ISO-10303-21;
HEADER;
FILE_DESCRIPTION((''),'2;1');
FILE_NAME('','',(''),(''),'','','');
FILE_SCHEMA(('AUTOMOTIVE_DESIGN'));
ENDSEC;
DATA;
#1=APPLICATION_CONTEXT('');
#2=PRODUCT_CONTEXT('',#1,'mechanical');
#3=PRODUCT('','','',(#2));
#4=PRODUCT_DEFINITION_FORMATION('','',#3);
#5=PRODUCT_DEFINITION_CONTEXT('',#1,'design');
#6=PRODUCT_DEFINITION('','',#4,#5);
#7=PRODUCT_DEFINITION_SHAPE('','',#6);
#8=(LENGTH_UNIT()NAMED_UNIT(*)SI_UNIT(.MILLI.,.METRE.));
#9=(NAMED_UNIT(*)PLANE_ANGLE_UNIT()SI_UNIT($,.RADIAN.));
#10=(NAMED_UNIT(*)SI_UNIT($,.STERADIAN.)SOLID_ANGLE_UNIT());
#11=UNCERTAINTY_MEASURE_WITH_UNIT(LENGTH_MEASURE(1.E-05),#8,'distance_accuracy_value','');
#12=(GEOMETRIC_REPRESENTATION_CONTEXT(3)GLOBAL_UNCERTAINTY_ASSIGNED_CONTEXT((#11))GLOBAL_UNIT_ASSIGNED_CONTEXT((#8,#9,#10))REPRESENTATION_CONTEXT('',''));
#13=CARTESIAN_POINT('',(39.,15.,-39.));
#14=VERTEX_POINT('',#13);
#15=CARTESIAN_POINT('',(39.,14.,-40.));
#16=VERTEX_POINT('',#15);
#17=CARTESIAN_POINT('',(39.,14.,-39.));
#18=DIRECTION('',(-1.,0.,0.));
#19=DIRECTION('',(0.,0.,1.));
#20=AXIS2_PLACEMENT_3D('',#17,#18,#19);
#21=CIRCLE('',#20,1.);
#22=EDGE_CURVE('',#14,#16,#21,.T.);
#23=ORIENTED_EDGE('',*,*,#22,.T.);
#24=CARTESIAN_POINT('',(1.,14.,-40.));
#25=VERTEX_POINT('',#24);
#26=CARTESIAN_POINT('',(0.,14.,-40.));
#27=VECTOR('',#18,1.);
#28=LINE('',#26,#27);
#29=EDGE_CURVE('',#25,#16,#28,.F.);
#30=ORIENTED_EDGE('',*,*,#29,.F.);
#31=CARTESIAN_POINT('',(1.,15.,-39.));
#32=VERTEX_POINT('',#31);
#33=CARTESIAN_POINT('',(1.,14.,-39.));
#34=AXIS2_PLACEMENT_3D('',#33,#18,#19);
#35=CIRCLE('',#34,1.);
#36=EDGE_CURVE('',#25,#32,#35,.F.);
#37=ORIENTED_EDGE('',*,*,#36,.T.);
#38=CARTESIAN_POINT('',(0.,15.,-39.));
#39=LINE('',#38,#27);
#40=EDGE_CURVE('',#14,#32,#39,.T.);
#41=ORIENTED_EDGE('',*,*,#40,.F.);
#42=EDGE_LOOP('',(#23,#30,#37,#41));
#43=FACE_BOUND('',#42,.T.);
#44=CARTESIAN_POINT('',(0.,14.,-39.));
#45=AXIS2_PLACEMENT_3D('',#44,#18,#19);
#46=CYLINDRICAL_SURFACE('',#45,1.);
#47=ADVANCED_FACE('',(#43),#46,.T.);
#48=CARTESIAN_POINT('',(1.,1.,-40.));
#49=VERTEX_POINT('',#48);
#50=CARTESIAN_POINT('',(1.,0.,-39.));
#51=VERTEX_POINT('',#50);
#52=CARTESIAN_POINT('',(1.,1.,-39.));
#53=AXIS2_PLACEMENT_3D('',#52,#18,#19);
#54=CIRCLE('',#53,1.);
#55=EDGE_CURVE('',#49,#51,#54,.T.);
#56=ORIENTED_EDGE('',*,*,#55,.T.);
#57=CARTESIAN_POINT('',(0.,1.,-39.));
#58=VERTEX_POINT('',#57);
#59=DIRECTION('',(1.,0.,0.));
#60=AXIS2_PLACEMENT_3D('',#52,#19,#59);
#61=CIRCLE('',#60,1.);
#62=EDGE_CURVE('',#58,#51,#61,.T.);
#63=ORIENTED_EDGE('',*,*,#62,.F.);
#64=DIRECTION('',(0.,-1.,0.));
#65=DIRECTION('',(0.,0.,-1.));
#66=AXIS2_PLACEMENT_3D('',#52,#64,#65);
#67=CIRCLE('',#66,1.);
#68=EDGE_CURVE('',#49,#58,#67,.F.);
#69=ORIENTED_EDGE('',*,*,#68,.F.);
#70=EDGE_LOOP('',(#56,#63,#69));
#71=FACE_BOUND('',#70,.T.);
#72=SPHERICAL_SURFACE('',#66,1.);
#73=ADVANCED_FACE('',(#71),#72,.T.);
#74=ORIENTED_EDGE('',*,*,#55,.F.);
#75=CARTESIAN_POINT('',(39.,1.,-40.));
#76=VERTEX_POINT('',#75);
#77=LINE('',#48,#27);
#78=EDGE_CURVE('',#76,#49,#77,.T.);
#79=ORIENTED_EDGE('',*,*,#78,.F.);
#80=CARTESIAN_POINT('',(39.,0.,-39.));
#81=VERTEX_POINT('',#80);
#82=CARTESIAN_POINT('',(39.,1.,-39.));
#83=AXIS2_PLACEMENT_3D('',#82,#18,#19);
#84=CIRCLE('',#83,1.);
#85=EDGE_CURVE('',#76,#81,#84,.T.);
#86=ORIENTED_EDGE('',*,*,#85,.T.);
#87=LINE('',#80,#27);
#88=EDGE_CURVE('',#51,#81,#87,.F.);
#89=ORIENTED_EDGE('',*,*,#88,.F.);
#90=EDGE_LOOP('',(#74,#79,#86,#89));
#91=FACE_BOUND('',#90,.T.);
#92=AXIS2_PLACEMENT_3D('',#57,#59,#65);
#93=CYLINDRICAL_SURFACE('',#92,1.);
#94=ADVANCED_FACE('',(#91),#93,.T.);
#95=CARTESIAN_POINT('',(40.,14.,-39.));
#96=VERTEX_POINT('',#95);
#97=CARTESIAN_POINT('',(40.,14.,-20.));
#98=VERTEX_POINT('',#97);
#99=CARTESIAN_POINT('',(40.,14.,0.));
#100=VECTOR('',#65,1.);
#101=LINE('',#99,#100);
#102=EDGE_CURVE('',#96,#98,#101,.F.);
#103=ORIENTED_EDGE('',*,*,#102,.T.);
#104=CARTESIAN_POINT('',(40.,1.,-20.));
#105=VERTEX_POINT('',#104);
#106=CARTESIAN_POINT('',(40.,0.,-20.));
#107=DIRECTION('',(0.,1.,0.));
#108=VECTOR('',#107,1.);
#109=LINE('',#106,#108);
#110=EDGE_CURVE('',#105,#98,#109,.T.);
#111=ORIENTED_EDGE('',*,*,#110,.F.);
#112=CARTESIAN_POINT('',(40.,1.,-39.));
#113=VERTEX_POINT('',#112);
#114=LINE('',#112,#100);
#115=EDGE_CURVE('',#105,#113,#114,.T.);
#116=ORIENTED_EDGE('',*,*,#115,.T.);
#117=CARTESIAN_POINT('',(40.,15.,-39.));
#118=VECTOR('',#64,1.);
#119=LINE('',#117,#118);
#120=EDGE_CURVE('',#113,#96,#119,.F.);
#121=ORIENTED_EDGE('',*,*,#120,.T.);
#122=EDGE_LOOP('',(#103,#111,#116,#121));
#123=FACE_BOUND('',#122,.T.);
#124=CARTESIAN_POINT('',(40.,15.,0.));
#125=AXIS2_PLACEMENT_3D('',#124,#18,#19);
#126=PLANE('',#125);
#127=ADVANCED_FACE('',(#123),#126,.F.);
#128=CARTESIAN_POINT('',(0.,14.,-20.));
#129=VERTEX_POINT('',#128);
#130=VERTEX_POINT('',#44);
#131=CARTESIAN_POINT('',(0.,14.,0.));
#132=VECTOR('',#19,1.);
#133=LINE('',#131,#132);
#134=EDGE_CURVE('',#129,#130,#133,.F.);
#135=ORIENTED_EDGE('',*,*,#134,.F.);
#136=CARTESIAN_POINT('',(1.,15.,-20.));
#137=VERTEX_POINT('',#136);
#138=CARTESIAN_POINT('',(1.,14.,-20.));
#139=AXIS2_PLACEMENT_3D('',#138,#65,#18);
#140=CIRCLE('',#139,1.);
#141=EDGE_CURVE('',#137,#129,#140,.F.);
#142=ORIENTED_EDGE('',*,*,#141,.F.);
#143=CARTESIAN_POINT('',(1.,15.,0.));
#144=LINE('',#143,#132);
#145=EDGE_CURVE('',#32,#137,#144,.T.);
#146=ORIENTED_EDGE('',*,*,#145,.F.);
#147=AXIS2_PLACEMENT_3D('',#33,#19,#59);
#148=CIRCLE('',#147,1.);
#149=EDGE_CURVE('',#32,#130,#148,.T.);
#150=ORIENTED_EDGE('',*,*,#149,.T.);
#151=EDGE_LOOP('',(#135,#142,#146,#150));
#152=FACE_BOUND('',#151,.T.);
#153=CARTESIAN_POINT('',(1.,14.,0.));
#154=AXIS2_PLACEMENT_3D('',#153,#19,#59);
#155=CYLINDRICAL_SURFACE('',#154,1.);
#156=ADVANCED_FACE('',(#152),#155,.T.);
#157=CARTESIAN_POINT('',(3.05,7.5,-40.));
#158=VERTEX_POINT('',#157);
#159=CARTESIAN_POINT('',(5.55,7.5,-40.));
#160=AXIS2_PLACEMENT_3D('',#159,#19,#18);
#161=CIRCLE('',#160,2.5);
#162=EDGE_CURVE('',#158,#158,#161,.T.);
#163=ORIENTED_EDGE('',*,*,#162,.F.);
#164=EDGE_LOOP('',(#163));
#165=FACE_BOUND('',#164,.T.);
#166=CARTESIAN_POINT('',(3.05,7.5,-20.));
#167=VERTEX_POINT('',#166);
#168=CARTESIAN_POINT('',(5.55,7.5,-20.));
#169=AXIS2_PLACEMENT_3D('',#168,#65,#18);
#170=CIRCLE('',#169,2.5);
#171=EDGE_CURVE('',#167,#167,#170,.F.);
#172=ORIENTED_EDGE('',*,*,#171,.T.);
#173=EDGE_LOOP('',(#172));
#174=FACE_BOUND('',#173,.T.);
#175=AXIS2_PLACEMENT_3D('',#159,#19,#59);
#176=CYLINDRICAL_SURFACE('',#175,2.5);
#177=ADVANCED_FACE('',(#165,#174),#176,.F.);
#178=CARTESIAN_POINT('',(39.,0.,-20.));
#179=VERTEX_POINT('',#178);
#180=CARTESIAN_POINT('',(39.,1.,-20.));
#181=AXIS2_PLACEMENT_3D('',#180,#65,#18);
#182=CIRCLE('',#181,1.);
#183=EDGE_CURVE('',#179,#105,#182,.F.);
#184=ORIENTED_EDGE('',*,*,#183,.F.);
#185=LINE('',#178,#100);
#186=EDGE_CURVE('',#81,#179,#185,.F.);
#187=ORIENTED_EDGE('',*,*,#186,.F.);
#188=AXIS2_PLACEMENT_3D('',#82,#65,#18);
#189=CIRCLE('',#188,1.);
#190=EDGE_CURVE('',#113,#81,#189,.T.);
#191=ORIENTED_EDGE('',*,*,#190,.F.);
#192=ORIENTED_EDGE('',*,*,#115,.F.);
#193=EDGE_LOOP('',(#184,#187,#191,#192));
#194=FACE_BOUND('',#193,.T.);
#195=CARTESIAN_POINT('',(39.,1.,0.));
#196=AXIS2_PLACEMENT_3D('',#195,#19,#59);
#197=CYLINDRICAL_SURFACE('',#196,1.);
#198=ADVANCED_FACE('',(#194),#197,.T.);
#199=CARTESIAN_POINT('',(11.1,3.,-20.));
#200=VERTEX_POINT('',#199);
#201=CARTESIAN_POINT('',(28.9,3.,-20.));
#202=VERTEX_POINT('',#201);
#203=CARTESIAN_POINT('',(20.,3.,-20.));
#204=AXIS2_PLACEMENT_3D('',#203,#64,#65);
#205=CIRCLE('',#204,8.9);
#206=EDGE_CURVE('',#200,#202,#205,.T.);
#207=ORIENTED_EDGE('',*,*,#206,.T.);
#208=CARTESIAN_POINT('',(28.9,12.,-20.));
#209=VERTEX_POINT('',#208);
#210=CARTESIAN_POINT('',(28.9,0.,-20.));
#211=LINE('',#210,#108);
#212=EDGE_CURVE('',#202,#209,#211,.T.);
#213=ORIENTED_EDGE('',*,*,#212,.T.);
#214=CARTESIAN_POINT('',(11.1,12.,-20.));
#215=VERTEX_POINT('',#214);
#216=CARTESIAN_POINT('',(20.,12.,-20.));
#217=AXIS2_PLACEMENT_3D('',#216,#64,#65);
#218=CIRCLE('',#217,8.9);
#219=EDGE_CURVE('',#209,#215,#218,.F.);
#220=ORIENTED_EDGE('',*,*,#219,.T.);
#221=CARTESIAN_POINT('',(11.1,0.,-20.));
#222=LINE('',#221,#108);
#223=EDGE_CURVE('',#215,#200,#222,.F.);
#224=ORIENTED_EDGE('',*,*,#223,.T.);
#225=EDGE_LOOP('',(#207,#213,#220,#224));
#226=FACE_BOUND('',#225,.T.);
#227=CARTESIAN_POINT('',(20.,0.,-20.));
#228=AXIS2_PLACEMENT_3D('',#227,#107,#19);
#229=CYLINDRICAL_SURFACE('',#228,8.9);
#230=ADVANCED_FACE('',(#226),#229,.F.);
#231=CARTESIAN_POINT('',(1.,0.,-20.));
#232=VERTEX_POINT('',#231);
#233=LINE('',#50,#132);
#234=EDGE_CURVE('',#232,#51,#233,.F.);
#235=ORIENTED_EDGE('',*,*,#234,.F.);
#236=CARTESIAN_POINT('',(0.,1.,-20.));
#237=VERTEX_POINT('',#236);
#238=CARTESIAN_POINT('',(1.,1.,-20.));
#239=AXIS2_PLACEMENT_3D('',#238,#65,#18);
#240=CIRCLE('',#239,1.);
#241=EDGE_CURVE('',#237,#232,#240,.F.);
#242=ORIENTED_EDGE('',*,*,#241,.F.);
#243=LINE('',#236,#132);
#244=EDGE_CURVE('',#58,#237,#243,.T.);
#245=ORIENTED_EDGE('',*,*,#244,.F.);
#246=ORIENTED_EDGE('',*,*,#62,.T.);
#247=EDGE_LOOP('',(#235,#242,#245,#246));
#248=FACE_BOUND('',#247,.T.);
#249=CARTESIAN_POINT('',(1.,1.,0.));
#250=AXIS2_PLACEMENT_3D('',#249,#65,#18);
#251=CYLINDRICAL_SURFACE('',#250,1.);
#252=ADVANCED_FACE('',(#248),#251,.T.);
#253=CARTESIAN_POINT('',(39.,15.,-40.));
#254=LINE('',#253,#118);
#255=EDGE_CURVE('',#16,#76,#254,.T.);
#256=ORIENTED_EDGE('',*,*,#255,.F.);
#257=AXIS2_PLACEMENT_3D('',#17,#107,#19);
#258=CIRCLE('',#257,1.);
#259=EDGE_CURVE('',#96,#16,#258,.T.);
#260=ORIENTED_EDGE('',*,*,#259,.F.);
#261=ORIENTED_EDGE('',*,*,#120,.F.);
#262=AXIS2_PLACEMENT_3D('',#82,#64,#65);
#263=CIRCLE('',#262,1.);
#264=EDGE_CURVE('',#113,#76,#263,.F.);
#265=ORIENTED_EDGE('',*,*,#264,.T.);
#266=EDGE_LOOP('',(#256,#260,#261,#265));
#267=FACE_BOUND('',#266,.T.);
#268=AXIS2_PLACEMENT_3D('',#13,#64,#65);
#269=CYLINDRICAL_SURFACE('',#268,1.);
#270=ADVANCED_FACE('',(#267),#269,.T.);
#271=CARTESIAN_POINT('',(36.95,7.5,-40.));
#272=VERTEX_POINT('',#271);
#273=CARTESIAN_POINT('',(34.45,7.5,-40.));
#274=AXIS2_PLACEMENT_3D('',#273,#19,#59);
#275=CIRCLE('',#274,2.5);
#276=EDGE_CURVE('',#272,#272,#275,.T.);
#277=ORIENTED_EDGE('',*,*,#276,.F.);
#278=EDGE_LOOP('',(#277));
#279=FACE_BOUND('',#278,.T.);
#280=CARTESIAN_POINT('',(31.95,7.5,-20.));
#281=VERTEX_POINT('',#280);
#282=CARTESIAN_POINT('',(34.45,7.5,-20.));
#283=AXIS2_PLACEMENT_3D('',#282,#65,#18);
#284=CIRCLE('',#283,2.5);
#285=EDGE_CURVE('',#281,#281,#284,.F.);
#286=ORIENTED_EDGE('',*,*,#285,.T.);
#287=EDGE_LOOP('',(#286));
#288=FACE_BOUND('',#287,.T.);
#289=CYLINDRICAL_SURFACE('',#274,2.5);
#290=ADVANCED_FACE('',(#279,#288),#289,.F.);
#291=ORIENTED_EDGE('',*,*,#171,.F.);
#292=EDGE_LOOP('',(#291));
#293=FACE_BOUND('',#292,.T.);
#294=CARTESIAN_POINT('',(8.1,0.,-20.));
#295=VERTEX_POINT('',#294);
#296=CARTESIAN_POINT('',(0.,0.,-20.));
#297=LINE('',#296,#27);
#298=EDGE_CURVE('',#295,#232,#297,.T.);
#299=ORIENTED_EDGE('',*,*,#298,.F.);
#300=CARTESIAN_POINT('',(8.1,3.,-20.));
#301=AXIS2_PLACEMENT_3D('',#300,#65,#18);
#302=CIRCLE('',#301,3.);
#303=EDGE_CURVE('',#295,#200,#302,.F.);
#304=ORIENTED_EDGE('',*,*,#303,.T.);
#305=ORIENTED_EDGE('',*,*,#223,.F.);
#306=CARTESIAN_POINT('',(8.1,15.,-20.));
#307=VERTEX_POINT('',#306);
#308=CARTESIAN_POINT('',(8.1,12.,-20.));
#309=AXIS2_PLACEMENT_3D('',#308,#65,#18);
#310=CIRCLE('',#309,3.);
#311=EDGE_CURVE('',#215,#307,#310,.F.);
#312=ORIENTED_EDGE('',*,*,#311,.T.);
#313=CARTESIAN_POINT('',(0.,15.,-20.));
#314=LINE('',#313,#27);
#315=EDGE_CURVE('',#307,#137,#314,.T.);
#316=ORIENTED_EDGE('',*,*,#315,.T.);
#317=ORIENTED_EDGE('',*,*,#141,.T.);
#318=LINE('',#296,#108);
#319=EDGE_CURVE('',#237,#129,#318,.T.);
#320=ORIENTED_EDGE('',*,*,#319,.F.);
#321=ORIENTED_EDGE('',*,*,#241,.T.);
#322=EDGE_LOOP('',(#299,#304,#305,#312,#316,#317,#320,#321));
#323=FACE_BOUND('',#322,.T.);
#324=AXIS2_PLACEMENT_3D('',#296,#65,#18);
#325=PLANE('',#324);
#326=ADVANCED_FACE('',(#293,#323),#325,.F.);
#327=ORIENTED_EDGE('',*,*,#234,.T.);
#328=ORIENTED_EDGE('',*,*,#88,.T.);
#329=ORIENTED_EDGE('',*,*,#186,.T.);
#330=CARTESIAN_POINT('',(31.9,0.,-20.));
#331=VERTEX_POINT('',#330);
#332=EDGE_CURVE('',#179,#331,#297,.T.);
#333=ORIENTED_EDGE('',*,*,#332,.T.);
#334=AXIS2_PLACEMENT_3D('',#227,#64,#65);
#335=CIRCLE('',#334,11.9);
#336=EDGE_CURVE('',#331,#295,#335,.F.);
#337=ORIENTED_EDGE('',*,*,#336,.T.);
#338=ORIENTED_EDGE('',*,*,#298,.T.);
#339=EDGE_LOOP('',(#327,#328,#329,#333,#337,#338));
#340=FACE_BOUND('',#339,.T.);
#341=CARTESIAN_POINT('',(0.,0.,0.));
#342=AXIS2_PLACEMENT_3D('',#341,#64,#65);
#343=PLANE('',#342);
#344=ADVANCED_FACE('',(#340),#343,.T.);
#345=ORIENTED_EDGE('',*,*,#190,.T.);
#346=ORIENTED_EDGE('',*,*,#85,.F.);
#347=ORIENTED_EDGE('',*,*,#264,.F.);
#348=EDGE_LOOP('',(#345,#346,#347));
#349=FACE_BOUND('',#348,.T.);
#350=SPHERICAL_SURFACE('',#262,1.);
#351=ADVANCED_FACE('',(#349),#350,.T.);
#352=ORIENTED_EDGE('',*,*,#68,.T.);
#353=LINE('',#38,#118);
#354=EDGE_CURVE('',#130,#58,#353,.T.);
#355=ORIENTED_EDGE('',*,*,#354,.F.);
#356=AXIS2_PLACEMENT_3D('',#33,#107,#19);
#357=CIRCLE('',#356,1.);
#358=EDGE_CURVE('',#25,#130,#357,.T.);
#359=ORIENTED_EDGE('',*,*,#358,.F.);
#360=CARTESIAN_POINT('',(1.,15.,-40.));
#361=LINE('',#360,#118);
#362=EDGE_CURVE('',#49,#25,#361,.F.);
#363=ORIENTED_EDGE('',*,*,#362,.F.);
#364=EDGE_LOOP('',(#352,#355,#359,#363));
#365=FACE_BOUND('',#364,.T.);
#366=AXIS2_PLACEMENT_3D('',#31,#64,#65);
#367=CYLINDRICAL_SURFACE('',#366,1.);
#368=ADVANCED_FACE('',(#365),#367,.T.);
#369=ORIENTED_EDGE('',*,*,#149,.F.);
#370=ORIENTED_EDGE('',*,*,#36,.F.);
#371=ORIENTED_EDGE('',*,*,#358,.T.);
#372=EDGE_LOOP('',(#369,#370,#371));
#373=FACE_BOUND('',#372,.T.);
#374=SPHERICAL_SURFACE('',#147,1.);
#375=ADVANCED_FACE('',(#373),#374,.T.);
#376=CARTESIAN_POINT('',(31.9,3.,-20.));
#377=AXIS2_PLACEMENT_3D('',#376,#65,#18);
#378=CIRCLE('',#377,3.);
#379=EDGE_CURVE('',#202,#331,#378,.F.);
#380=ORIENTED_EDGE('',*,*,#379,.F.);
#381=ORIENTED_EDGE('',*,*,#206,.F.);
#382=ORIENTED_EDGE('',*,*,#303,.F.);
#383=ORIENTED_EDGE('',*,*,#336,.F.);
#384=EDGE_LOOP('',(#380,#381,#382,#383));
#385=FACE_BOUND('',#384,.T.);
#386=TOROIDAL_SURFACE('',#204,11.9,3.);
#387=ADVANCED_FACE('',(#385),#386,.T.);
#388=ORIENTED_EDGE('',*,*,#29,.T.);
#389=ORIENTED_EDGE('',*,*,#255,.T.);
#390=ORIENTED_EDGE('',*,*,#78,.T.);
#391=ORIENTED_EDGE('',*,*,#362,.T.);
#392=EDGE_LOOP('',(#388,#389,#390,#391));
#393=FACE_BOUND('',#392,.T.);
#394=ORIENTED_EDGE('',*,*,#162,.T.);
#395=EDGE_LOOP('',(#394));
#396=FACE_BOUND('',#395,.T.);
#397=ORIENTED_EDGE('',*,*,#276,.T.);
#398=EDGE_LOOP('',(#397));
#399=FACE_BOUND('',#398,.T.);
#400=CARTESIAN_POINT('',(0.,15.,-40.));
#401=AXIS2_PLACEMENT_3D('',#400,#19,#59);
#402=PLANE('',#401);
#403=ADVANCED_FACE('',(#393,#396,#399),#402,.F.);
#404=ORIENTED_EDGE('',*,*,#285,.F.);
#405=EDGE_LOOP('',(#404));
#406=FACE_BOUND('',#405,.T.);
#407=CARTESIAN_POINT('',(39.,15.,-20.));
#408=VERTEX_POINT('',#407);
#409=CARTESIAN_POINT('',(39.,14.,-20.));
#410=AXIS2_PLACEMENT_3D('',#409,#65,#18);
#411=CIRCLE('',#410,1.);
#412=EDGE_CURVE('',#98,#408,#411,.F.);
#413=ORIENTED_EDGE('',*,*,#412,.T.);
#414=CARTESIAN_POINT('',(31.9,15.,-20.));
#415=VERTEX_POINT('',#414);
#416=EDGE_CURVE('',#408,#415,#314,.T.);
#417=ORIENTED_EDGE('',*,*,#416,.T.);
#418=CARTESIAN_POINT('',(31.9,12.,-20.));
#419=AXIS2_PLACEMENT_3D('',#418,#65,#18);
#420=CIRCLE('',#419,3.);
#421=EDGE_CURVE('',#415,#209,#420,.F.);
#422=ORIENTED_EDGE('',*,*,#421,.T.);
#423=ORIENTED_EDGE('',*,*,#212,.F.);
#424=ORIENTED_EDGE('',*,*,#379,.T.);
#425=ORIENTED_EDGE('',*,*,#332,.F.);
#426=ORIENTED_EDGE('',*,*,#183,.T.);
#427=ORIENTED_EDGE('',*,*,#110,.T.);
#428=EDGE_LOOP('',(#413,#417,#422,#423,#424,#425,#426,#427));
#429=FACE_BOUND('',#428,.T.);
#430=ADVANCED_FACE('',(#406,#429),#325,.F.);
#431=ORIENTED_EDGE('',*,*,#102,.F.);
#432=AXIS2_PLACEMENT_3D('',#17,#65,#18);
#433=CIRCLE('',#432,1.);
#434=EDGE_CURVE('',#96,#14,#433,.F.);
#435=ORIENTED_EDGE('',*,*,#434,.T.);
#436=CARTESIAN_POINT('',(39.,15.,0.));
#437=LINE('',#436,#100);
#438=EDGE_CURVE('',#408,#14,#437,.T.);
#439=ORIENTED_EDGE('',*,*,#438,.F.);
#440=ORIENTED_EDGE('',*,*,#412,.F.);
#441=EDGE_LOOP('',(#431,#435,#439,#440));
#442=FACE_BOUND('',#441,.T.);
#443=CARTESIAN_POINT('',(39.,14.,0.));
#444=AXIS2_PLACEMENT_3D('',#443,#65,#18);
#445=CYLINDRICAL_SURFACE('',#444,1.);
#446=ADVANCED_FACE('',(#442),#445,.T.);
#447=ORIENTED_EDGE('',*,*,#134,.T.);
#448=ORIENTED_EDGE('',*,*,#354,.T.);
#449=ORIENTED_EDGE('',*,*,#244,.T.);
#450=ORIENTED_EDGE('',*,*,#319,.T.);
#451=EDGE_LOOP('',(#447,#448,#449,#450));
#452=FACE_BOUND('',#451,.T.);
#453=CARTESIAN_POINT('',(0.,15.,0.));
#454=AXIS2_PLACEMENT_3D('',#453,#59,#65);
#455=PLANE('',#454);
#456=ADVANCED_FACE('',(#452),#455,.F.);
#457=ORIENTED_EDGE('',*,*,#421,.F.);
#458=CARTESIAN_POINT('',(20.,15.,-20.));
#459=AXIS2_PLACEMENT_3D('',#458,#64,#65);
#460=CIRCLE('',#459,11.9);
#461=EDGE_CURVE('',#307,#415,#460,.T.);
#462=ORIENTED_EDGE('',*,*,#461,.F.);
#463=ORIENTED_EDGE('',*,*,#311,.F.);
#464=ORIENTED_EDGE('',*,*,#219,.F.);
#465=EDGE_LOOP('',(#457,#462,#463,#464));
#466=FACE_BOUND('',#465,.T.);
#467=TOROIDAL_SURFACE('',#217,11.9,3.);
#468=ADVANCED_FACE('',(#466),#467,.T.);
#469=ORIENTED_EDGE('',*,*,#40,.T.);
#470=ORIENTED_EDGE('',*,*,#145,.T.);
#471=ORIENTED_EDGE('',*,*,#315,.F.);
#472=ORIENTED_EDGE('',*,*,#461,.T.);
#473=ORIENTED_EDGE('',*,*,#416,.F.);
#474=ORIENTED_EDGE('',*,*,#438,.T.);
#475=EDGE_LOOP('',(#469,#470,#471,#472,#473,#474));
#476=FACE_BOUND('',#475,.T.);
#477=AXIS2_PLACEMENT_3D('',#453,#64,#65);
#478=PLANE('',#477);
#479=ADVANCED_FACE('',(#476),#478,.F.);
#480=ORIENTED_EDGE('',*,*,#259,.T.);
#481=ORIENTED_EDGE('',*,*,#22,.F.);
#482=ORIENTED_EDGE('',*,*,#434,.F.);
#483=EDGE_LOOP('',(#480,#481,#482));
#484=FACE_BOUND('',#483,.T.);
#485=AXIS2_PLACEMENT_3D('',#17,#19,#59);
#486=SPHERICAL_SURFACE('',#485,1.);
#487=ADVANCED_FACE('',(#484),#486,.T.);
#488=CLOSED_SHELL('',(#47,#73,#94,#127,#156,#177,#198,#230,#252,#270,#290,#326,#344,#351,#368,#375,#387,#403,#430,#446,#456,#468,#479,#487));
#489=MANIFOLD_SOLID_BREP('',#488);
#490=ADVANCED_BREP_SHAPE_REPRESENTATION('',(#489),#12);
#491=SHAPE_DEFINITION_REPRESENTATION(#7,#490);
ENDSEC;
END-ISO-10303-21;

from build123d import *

# Parameters (mm, degrees)
SKETCH_1_W          = 40
SKETCH_1_H          = 40
EXTRUDE_1_DEPTH     = 15
SKETCH_3_R          = 8.9
CUT_EXTRUDE_1_DEPTH = 59.523499554
SKETCH_5_R          = 2.5
CUT_EXTRUDE_2_DEPTH = 59.523499554
SKETCH_6_W          = 40
SKETCH_6_H          = 20
CUT_EXTRUDE_3_DEPTH = 59.523499554
FILLET_1_R          = 3
FILLET_2_R          = 1
FILLET_3_R          = 1
FILLET_4_R          = 1


with BuildPart() as part:
    # 草圖1 → 填料-伸長1 (new body)
    with BuildSketch(Plane(origin=(0, 0, 0), x_dir=(1, 0, 0), z_dir=(0, 1, 0))):
        with Locations((20, 20)):
            Rectangle(SKETCH_1_W, SKETCH_1_H)
    extrude(amount=EXTRUDE_1_DEPTH)

    # 草圖3 → 除料-伸長1 (cut, through all)
    with BuildSketch(Plane(origin=(0, 15, 0), x_dir=(1, 0, 0), z_dir=(0, 1, 0))):
        with Locations(Location((20, 20, 0), (0, 0, 270))):
            Circle(SKETCH_3_R)
    extrude(amount=-CUT_EXTRUDE_1_DEPTH, mode=Mode.SUBTRACT)

    # 草圖5 → 除料-伸長2 (cut, through all)
    with BuildSketch(Plane.XY):
        with Locations((34.45, 7.5)):
            Circle(SKETCH_5_R)
        with Locations(Location((5.55, 7.5, 0), (0, 0, 180))):
            Circle(SKETCH_5_R)
    extrude(amount=-CUT_EXTRUDE_2_DEPTH, mode=Mode.SUBTRACT)

    # 草圖6 → 除料-伸長3 (cut, through all)
    with BuildSketch(Plane(origin=(0, 15, 0), x_dir=(1, 0, 0), z_dir=(0, 1, 0))):
        with Locations((20, 10)):
            Rectangle(SKETCH_6_W, SKETCH_6_H)
    extrude(amount=-CUT_EXTRUDE_3_DEPTH, mode=Mode.SUBTRACT)

    # 圓角1
    fillet_1_edges = [part.edges().sort_by_distance(p)[0] for p in [
        (20, 0, -28.9),
        (20, 15, -28.9),
    ]]
    fillet(fillet_1_edges, radius=FILLET_1_R)

    # 圓角2
    fillet_2_edges = [part.edges().sort_by_distance(p)[0] for p in [
        (20, 15, -40),
        (40, 15, -30),
        (0, 15, -30),
    ]]
    fillet(fillet_2_edges, radius=FILLET_2_R)

    # 圓角3
    # the kernel refuses this fillet: 1 mm, written as the material it takes off along each edge
    with BuildSketch(Plane(origin=(39, 14, -39), x_dir=(0, 0, -1), z_dir=(1, 0, 0))) as fillet_3_piece_1_section:
        Polygon((0, 0), (FILLET_3_R, 0), (FILLET_3_R, FILLET_3_R), (0, FILLET_3_R), align=None)
    fillet_3_piece_1 = extrude(amount=FILLET_3_R, mode=Mode.PRIVATE)
    fillet_3_piece_1 = fillet_3_piece_1 - Plane(origin=(39, 14, -39), x_dir=(0, -0.7071067811865475, 0.7071067811865475), z_dir=(1, 0, 0)) * Sphere(FILLET_3_R, mode=Mode.PRIVATE)
    add(fillet_3_piece_1, mode=Mode.SUBTRACT)
    with BuildSketch(Plane(origin=(1, 14, -39), x_dir=(-1, 0, 0), z_dir=(0, 0, -1))) as fillet_3_piece_2_section:
        Polygon((0, 0), (FILLET_3_R, 0), (FILLET_3_R, FILLET_3_R), (0, FILLET_3_R), align=None)
    fillet_3_piece_2 = extrude(amount=FILLET_3_R, mode=Mode.PRIVATE)
    fillet_3_piece_2 = fillet_3_piece_2 - Plane(origin=(1, 14, -39), x_dir=(0.7071067811865475, -0.7071067811865475, 0), z_dir=(0, 0, -1)) * Sphere(FILLET_3_R, mode=Mode.PRIVATE)
    add(fillet_3_piece_2, mode=Mode.SUBTRACT)
    with BuildSketch(Plane(origin=(0, -2.5, -40), x_dir=(1, 0, 0), z_dir=(0, 1, 0)), Plane(origin=(40, -2.5, -40), x_dir=(0, 0, 1), z_dir=(0, 1, 0))) as fillet_3_piece_3:
        with BuildLine():
            CenterArc((FILLET_3_R, -FILLET_3_R), FILLET_3_R, 90, 90)
            Line((0, -FILLET_3_R), (0, 0))
            Line((0, 0), (FILLET_3_R, 0))
        make_face()
    extrude(amount=16.5, mode=Mode.SUBTRACT)

    # 圓角4
    fillet_4_edges = [part.edges().sort_by_distance(p)[0] for p in [
        (40, 0, -29.5),
        (20, 0, -40),
        (0, 0, -29.5),
        (0.292893219, 0, -39.707106781),
        (39.707106781, 0, -39.707106781),
    ]]
    fillet(fillet_4_edges, radius=FILLET_4_R)


solid = part.part
